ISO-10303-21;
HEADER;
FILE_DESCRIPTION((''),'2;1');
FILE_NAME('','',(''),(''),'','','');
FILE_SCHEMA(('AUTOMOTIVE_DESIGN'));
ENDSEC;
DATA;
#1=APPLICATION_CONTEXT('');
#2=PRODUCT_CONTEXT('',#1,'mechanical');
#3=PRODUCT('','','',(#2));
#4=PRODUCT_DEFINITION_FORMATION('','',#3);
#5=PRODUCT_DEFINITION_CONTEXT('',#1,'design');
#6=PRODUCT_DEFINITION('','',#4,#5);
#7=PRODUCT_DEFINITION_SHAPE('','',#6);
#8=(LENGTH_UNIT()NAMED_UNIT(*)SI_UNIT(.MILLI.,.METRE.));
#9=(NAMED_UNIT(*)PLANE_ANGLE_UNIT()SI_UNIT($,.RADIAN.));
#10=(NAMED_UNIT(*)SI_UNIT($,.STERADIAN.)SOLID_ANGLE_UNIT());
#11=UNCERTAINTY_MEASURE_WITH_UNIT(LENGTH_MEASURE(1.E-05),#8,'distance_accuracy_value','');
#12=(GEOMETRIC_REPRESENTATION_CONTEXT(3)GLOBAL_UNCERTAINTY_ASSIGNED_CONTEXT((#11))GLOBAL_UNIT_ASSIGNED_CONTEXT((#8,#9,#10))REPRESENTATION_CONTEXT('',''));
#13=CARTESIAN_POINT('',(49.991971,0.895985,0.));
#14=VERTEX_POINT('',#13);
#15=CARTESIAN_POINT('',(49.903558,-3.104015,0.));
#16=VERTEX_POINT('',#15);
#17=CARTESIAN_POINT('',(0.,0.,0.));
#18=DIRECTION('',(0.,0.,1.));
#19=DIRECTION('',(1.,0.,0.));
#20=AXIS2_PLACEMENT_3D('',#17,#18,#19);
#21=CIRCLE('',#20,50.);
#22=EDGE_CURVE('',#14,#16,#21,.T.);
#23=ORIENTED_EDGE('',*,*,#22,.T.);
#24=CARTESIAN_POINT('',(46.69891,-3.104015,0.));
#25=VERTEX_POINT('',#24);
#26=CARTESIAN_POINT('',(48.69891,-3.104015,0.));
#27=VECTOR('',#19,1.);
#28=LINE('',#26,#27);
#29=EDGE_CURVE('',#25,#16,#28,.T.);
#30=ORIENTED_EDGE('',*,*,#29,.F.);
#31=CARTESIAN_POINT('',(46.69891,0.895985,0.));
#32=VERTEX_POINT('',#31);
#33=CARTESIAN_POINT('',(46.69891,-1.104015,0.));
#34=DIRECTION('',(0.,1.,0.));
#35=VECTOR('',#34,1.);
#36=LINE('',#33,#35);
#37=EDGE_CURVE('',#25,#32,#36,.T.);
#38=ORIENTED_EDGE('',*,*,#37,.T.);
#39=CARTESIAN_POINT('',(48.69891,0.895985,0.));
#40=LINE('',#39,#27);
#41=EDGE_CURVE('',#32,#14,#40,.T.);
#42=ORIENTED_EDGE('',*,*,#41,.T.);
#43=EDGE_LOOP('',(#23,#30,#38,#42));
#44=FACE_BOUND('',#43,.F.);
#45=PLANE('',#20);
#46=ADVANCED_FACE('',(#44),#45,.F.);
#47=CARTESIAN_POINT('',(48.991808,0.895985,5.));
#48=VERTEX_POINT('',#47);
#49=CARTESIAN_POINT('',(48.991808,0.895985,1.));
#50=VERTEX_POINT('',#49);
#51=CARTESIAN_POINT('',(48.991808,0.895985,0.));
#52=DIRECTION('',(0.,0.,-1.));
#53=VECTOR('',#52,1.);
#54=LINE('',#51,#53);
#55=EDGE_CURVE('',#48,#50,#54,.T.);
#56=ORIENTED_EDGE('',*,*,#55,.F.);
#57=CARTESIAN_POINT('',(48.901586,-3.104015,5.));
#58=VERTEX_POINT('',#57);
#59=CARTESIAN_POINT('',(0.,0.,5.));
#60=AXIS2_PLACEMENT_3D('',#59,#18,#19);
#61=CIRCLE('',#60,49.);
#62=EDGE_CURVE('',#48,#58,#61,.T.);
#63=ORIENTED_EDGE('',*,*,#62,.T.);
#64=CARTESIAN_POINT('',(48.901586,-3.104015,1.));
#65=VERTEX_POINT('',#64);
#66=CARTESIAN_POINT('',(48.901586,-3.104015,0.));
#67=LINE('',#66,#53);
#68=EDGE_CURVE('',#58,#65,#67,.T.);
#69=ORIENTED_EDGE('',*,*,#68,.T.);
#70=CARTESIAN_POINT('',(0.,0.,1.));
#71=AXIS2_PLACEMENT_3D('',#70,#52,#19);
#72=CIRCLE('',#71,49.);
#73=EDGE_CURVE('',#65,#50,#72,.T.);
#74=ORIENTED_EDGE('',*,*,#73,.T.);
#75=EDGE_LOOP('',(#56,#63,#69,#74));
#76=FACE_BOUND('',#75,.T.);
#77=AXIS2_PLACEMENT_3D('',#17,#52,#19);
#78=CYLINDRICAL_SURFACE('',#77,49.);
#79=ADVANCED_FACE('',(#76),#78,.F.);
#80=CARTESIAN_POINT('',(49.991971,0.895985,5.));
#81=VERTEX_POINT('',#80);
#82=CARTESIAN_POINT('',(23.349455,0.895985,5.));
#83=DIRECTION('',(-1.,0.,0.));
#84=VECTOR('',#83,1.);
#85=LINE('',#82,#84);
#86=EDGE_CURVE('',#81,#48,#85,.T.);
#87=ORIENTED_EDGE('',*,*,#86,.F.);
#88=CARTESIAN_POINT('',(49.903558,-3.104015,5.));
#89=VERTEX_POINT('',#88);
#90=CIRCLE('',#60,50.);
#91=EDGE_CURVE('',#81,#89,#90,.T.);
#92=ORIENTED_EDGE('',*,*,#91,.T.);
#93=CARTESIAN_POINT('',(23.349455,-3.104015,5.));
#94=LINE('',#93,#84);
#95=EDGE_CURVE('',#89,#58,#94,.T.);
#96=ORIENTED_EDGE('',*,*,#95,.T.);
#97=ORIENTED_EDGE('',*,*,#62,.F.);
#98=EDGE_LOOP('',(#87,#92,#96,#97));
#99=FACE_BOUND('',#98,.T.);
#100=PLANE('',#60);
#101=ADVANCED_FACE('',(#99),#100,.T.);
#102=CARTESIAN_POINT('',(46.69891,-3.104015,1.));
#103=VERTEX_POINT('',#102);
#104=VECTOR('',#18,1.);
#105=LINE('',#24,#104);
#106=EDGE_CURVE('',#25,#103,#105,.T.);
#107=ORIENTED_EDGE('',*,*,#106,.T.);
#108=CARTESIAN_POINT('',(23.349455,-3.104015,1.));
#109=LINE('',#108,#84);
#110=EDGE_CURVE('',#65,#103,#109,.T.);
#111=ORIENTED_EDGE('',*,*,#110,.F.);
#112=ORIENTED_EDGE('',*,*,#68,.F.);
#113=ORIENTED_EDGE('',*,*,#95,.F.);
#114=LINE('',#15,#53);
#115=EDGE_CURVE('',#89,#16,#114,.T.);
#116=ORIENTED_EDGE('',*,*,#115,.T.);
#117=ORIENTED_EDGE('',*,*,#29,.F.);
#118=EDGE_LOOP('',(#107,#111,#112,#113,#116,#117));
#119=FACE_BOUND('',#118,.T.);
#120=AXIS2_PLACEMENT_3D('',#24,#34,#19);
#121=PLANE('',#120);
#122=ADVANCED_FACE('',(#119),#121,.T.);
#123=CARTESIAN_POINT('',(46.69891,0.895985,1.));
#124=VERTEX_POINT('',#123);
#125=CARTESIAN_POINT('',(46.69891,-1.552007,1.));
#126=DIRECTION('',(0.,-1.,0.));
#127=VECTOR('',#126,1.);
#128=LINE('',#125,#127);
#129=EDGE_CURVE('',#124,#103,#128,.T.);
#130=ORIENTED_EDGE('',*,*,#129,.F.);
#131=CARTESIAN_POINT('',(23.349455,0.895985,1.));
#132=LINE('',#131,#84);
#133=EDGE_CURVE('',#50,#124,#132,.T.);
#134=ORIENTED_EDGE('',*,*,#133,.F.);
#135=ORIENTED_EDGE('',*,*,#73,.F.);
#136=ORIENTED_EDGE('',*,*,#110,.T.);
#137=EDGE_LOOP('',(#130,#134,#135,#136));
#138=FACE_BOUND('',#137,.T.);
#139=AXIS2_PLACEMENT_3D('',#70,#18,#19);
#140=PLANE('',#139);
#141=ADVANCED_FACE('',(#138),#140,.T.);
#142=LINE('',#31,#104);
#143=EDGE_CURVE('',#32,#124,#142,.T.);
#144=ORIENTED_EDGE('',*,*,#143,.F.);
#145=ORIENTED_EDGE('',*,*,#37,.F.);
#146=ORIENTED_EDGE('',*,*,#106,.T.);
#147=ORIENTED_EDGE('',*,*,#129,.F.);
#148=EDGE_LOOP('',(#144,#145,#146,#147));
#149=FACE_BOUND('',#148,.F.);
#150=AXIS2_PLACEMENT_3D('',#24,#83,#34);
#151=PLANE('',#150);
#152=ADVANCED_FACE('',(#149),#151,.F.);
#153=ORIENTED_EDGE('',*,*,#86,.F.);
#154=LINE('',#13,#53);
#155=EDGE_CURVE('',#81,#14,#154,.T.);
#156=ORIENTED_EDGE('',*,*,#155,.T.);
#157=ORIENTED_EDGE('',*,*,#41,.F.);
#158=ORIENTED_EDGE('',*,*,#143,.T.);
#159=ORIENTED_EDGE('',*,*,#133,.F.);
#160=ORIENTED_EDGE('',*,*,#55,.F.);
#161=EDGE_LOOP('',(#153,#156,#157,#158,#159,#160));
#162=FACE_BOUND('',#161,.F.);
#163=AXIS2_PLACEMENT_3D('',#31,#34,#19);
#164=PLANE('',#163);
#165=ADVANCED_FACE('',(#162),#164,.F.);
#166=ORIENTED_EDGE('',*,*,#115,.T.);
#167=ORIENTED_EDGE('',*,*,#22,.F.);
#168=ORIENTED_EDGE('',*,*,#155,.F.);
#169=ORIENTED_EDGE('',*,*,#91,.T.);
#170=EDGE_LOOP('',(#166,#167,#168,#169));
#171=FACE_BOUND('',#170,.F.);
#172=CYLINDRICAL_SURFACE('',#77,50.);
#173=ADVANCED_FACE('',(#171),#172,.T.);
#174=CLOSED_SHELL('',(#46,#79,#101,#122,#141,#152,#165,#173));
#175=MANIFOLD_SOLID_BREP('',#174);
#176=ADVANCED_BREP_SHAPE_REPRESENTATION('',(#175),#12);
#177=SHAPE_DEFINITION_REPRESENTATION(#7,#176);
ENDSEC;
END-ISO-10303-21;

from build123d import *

# Parameters (mm, degrees)
F0_R     = 50
F1_DEPTH = 5
F2_T     = -1
F3_W     = 4
F3_H     = 4
F4_DEPTH = 6


# Not quite as in the source:
# - the program builds the solid bodies; features that only make, move or delete a surface that nothing else refers to are left out


with BuildPart() as f1:
    # F0 (on Top) → F1 (new body)
    with BuildSketch(Plane.XY):
        Circle(F0_R)
    extrude(amount=F1_DEPTH)

    # F2
    f2_openings = [f1.faces().sort_by_distance(p)[0] for p in [
        (0, 0, 5),
    ]]
    offset(amount=F2_T, openings=f2_openings)

    # F3 (on Top) → F4 (cut)
    with BuildSketch(Plane.XY):
        with Locations((48.6989099085, -1.1040147878)):
            Rectangle(F3_W, F3_H)
    extrude(amount=F4_DEPTH, mode=Mode.SUBTRACT)


solid = f1.part
